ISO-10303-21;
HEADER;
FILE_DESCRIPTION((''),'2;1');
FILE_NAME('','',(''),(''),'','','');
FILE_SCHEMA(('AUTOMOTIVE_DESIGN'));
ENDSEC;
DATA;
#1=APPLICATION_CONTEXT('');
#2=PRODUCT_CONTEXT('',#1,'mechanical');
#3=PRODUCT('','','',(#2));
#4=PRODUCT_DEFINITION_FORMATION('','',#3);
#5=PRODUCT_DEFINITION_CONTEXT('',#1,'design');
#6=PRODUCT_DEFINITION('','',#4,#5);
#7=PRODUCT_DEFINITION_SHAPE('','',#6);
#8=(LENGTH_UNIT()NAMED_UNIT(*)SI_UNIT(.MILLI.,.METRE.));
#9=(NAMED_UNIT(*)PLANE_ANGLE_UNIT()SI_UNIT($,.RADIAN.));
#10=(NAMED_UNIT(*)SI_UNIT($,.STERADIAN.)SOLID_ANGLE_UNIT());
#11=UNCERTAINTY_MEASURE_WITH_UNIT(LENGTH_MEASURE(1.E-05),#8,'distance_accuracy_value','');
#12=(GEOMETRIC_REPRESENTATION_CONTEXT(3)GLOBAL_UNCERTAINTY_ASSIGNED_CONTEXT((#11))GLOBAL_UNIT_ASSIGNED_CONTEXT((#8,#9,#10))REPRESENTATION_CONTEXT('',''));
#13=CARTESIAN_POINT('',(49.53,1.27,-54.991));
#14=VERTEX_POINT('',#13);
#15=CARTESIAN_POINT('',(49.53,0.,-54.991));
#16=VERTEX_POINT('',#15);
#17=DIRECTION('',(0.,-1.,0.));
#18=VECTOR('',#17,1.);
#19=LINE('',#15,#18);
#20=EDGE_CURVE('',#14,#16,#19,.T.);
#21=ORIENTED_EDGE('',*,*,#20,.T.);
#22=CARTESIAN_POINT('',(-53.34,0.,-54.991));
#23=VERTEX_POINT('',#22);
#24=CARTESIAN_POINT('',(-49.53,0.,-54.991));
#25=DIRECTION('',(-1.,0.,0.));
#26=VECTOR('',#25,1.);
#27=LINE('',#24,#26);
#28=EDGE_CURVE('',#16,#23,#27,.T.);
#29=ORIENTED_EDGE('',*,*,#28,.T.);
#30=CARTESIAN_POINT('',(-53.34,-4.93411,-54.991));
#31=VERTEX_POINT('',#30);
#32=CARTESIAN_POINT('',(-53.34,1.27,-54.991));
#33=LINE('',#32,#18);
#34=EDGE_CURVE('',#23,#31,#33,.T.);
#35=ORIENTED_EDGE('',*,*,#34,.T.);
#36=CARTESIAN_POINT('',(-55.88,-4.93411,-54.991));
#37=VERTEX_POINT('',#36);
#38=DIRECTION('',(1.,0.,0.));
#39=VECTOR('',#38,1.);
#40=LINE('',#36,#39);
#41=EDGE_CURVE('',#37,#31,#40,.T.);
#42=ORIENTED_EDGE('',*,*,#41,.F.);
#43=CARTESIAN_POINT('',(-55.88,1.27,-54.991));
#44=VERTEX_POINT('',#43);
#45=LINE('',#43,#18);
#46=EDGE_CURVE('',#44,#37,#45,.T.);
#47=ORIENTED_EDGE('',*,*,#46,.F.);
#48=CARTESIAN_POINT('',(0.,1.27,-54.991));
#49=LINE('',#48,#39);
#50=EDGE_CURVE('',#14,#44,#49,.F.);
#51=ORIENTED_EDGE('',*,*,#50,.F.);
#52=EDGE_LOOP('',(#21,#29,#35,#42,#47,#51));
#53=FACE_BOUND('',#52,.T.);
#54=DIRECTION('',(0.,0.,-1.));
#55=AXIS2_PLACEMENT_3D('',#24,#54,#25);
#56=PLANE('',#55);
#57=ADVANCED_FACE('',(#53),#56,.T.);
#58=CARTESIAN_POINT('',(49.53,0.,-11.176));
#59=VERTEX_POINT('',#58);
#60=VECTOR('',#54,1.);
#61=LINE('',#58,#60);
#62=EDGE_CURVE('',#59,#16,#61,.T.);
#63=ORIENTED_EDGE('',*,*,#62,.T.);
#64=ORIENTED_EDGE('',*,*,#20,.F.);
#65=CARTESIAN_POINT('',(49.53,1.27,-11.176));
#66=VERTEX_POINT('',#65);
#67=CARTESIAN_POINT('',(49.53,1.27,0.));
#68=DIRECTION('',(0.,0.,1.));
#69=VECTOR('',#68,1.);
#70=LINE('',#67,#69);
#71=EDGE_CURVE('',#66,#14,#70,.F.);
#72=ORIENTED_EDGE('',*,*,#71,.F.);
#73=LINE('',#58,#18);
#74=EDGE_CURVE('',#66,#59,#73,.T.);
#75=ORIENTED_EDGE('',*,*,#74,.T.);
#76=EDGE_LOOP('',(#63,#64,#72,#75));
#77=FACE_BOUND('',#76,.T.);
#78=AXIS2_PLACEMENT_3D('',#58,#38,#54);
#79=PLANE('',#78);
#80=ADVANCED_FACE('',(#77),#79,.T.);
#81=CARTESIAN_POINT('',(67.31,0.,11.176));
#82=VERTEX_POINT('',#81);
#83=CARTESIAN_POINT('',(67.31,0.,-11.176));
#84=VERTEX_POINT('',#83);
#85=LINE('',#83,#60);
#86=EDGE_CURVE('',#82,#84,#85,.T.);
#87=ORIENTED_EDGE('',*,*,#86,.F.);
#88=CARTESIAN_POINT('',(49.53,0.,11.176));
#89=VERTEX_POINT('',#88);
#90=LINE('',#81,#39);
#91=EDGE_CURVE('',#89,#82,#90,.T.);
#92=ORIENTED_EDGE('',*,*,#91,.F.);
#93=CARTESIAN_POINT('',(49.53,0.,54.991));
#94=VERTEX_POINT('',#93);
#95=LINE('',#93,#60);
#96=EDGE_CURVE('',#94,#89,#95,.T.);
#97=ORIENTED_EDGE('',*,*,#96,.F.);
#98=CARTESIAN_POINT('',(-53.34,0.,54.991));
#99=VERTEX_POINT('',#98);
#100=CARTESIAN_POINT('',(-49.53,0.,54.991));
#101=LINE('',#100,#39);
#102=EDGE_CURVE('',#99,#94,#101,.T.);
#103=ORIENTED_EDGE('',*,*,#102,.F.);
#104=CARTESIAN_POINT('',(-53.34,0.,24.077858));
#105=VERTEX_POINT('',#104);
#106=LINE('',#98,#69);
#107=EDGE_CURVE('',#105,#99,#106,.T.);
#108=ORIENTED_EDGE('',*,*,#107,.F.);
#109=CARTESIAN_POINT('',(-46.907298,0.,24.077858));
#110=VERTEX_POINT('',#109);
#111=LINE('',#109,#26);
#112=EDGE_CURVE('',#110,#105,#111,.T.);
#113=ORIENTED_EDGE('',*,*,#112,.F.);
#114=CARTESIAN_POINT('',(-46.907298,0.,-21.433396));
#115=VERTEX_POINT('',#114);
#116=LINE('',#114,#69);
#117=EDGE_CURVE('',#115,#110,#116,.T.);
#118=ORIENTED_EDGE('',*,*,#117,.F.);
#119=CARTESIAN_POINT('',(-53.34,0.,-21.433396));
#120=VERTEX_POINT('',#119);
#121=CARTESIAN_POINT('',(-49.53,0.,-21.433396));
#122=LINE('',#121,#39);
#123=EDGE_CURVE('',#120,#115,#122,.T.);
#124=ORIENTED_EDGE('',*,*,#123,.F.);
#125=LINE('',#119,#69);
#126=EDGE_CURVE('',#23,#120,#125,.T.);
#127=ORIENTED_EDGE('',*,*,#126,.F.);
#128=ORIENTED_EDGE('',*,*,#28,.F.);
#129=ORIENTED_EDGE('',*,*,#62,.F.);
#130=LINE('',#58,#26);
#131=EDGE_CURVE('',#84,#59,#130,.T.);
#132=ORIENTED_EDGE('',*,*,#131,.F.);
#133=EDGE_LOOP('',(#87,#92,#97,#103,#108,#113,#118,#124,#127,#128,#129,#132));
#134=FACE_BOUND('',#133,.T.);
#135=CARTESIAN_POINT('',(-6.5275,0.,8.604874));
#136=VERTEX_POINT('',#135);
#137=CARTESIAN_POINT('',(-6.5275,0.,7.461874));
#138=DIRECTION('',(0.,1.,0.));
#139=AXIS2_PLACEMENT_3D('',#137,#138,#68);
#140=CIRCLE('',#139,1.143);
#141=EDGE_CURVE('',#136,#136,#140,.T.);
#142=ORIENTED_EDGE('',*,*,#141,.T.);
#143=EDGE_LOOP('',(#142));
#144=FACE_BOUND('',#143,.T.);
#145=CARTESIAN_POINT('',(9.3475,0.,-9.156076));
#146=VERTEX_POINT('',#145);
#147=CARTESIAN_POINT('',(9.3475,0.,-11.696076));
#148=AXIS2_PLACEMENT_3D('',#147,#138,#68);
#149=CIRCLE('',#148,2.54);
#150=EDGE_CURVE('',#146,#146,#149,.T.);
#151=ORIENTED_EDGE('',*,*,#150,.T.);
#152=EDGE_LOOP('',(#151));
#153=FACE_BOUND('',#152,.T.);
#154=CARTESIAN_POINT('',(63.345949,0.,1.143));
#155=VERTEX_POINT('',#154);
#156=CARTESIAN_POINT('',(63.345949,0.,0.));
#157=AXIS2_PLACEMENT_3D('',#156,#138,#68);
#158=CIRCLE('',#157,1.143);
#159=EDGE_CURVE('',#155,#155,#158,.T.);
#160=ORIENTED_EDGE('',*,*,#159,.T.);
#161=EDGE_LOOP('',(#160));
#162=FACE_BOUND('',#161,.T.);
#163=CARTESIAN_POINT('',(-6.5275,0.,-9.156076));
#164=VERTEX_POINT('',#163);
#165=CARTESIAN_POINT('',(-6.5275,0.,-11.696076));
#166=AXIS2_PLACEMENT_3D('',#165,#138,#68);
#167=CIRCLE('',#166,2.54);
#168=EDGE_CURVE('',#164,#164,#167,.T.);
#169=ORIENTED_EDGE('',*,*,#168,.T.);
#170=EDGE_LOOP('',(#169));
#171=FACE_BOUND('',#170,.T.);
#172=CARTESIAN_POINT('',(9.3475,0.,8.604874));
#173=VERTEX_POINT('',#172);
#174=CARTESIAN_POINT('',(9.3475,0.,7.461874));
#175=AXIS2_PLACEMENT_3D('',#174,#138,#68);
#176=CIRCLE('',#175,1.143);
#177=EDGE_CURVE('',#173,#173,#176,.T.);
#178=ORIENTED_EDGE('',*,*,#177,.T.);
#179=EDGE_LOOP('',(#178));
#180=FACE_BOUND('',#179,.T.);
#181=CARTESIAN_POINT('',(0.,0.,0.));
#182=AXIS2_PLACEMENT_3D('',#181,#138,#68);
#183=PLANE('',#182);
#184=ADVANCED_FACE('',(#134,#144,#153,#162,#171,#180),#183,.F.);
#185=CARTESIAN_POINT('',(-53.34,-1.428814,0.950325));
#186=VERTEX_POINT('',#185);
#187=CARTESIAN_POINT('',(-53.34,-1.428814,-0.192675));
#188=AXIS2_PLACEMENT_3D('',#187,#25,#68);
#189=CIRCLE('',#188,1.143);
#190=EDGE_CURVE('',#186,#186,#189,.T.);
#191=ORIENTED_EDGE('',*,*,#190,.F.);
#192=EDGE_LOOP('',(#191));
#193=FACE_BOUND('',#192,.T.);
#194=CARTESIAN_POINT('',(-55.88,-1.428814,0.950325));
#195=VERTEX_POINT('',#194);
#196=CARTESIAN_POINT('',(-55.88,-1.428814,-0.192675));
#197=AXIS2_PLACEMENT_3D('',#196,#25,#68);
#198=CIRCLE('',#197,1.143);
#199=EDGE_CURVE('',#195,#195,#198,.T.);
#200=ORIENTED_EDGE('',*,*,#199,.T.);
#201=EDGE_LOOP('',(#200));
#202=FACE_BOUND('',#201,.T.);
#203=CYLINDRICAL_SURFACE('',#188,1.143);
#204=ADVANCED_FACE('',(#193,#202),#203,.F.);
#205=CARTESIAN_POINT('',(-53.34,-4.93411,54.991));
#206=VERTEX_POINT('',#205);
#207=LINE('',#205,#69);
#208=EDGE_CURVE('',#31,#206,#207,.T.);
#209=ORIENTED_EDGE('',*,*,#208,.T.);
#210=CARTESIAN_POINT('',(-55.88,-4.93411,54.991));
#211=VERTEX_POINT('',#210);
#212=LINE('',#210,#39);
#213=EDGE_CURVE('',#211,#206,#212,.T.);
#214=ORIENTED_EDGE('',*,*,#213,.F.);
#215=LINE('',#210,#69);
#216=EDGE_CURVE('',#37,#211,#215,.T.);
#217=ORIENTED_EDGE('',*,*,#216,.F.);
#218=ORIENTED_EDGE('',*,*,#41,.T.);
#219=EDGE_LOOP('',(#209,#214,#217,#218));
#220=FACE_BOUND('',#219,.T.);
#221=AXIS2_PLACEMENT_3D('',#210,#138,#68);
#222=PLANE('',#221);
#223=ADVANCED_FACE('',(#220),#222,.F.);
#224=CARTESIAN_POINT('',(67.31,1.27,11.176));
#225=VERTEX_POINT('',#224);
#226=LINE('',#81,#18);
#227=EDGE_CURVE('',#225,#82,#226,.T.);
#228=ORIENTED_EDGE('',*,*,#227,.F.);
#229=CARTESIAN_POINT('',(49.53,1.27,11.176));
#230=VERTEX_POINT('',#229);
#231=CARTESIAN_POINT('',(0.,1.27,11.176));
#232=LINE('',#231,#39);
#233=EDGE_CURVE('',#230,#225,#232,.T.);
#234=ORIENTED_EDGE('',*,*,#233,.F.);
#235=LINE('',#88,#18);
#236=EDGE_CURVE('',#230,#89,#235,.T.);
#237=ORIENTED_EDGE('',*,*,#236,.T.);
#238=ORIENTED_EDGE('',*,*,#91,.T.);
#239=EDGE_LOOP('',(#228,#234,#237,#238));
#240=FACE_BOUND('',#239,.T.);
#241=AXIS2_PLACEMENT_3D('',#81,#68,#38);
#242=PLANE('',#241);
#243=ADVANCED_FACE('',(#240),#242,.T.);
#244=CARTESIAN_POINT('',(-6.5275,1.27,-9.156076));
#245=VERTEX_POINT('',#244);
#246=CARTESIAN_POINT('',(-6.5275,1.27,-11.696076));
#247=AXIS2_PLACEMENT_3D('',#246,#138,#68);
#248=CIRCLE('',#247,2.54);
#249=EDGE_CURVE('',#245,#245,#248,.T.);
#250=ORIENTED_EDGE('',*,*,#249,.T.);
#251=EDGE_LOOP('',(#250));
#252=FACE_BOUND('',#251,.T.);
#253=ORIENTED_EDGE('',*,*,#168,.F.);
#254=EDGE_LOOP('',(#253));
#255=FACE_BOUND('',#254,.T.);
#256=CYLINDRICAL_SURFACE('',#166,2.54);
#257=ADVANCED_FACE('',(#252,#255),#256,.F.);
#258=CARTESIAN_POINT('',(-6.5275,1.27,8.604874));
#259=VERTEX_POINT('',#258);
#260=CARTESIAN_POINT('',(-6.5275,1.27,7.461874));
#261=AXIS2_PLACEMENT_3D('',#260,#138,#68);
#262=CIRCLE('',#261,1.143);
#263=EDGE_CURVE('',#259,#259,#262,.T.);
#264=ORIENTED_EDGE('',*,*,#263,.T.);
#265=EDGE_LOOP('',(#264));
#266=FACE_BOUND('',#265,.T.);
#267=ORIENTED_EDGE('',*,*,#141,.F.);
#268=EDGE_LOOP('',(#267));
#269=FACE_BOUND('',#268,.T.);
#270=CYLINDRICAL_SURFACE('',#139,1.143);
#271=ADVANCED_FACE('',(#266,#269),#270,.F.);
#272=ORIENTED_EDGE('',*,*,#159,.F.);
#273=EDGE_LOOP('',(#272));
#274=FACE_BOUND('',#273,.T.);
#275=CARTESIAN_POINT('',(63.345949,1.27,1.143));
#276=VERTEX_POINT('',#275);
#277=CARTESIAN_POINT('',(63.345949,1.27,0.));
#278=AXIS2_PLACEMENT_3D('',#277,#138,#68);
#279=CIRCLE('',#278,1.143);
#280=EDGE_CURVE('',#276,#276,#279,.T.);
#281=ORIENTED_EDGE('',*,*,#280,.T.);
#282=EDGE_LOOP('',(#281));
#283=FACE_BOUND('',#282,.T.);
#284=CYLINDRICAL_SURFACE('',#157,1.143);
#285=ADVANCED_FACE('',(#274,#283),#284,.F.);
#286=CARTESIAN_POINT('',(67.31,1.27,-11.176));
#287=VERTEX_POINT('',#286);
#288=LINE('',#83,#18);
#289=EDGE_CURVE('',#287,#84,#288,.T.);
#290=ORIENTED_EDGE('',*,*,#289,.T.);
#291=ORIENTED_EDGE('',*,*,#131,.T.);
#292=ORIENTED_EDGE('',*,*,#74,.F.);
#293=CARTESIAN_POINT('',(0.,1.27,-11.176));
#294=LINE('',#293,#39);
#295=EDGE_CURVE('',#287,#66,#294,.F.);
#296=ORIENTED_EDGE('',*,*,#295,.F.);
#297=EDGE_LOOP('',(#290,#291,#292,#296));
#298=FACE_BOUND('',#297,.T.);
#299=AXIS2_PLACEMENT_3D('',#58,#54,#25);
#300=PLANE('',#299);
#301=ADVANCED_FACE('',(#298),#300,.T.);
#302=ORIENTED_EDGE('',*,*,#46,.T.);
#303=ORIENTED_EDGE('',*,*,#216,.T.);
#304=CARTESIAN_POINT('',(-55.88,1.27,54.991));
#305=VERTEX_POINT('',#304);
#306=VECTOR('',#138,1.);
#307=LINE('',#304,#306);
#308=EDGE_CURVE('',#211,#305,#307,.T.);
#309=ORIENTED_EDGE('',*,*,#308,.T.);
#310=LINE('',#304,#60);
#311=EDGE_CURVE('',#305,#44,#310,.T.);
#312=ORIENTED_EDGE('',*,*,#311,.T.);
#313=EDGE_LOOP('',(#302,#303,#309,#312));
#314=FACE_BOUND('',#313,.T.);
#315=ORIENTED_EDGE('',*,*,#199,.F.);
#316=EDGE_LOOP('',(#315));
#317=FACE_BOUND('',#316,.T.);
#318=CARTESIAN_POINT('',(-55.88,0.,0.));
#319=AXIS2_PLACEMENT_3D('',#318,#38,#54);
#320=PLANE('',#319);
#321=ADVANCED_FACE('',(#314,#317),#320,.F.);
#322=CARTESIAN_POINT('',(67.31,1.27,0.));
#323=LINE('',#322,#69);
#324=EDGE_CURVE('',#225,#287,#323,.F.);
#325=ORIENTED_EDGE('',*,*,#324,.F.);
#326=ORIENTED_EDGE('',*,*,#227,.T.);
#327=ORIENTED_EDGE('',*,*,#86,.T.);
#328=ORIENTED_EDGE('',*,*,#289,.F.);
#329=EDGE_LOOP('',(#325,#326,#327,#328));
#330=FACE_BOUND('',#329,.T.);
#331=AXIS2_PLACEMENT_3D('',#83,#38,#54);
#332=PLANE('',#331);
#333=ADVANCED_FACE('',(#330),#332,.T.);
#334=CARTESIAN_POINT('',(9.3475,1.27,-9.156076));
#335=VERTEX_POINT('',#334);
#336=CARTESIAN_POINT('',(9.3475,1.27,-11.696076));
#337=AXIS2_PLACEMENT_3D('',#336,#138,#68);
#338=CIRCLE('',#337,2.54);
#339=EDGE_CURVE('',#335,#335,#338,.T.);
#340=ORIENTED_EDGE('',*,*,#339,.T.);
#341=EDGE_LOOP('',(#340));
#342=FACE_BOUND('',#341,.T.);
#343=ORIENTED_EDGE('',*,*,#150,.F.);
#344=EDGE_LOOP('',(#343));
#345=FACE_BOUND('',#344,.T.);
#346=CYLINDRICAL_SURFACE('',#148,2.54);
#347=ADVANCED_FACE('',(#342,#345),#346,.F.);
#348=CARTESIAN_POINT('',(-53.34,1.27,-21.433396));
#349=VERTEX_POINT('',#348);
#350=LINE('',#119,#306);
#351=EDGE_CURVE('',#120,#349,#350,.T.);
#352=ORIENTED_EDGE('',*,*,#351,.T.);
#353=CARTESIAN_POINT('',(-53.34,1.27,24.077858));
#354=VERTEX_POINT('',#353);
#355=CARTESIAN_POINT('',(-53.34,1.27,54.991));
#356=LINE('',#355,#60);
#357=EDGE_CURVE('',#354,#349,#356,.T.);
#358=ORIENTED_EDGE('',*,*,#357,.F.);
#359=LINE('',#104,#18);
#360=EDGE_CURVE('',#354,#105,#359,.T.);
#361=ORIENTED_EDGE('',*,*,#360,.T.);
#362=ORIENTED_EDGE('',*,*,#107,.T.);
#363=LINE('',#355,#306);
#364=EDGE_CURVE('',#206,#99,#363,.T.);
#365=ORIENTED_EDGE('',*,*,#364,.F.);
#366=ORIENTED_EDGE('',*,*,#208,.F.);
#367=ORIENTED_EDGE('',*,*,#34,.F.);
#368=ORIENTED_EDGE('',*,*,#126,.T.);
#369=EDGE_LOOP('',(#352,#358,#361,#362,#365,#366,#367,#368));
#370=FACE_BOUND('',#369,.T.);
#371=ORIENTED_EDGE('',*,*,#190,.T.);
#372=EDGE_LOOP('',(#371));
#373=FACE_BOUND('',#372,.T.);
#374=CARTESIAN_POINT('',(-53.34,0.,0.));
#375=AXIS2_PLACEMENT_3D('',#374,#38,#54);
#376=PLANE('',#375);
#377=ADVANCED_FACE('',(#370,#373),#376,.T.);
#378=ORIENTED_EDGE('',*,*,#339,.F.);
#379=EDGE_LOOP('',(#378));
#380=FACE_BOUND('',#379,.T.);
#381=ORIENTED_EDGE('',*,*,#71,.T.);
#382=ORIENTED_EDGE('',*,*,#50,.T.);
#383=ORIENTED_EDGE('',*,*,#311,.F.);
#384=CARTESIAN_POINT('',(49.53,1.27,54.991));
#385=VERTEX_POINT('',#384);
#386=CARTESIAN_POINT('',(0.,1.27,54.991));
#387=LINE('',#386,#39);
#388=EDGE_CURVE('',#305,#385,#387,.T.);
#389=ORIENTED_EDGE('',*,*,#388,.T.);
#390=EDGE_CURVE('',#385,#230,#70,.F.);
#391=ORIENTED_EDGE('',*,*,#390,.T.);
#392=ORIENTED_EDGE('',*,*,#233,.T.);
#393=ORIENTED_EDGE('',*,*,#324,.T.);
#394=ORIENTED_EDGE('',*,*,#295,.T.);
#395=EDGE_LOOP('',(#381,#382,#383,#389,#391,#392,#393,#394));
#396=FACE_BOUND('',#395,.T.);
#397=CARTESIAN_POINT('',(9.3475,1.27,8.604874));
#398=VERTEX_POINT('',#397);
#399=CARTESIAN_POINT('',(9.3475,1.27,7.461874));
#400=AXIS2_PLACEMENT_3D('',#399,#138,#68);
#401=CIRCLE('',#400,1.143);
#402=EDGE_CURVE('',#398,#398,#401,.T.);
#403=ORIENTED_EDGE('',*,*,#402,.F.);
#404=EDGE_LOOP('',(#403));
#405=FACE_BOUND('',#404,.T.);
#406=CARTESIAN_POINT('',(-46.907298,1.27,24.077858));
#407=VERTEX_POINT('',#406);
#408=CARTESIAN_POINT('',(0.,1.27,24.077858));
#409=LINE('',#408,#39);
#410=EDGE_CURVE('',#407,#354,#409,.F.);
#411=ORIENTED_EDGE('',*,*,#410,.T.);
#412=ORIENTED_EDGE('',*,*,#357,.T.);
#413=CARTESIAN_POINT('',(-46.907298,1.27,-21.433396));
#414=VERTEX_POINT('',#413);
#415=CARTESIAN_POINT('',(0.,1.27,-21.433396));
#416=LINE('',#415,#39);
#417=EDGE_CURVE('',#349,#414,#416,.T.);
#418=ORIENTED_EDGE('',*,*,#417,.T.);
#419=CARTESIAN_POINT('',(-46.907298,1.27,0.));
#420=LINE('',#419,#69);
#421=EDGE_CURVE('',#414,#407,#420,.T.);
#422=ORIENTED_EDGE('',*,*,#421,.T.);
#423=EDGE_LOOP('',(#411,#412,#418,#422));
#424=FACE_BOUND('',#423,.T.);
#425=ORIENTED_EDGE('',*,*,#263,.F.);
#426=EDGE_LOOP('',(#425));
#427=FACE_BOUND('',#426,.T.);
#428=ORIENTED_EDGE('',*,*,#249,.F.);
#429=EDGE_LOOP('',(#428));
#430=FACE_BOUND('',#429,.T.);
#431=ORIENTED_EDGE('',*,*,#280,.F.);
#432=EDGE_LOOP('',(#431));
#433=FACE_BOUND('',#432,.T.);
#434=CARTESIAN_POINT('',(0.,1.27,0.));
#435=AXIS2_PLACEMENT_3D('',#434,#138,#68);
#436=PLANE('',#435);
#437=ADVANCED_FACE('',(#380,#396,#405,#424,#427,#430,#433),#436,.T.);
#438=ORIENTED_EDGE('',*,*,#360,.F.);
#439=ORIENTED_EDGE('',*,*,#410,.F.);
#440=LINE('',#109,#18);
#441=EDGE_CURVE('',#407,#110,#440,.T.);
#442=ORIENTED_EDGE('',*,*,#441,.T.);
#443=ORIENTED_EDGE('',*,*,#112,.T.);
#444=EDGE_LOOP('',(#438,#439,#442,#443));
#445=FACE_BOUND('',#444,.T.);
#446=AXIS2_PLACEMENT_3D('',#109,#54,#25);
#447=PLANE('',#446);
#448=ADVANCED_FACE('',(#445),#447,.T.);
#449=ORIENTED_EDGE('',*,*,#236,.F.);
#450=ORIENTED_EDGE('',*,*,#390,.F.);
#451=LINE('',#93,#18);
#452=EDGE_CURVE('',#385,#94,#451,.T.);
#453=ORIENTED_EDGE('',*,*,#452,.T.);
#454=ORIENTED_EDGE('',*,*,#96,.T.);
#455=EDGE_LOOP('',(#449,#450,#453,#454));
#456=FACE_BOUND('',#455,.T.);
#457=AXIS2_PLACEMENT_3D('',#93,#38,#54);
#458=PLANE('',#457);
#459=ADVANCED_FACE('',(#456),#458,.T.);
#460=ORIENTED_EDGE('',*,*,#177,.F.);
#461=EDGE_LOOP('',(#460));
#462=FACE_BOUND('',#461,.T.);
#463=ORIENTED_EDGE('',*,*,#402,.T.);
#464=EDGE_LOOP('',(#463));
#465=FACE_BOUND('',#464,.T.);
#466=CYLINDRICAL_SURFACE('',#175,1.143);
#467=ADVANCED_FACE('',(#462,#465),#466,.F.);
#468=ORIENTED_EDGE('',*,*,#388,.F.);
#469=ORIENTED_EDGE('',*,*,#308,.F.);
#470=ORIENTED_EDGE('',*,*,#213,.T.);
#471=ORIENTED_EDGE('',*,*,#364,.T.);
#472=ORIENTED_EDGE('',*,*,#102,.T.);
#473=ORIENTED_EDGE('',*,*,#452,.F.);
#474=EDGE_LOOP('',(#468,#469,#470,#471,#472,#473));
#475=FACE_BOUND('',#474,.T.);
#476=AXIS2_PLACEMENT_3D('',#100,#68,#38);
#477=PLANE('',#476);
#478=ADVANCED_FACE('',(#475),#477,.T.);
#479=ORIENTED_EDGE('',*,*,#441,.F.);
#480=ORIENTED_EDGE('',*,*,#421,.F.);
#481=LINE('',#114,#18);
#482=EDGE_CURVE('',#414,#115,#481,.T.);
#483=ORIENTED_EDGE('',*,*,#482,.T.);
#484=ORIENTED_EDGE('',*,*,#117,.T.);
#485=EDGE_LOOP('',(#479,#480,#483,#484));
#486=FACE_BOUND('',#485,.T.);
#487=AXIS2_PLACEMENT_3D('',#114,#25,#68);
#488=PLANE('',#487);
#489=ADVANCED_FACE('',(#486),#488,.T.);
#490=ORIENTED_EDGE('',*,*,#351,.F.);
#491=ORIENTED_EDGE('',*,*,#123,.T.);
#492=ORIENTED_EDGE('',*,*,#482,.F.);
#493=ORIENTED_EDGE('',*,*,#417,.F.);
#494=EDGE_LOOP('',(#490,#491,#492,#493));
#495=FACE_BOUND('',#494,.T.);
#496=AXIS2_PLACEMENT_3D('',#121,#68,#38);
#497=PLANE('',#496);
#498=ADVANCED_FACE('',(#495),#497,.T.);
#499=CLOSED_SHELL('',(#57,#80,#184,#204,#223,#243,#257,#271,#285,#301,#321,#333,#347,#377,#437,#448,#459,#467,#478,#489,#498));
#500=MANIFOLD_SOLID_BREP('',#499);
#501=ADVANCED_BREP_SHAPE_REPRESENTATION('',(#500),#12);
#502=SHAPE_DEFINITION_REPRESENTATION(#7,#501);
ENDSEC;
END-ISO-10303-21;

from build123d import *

# Parameters (mm, degrees)
BOSS_EXTRUDE1_DEPTH = 1.27
SKETCH2_R           = 1.143
CUT_EXTRUDE2_DEPTH  = 2.54
SKETCH3_R           = 2.54
SKETCH3_R_2         = 1.143
CUT_EXTRUDE3_DEPTH  = 2.54
SKETCH19_W          = 30.913141625
SKETCH19_H          = 1.27
BOSS_EXTRUDE2_DEPTH = 3.81
SKETCH20_W          = 33.557604238
SKETCH20_H          = 1.27
BOSS_EXTRUDE3_DEPTH = 3.81
SKETCH21_W          = 109.982
SKETCH21_H          = 6.204110365
BOSS_EXTRUDE4_DEPTH = 2.54
SKETCH22_R          = 1.143
CUT_EXTRUDE6_DEPTH  = 2.54


with BuildPart() as part:
    # Sketch1 → Boss-Extrude1 (new body)
    with BuildSketch(Plane(origin=(0, 0, 0), x_dir=(1, 0, 0), z_dir=(0, 1, 0))):
        Polygon((49.53, -54.991), (49.53, -11.176), (67.31, -11.176), (67.31, 11.176), (49.53, 11.176), (49.53, 54.991), (-49.53, 54.991), (-49.53, 21.433395762), (-46.907297859, 21.433395762), (-46.907297859, -24.077858375), (-49.53, -24.077858375), (-49.53, -54.991), align=None)
    extrude(amount=BOSS_EXTRUDE1_DEPTH)

    # Sketch2 → Cut-Extrude2 (cut)
    with BuildSketch(Plane(origin=(0, 1.27, 0), x_dir=(1, 0, 0), z_dir=(0, 1, 0))):
        with Locations(Location((63.345949026, 0, 0), (0, 0, 270))):
            Circle(SKETCH2_R)
    extrude(amount=-CUT_EXTRUDE2_DEPTH, mode=Mode.SUBTRACT)

    # Sketch3 → Cut-Extrude3 (cut)
    with BuildSketch(Plane(origin=(0, 1.27, 0), x_dir=(1, 0, 0), z_dir=(0, 1, 0))):
        with Locations(Location((-6.5275, 11.696076054, 0), (0, 0, 270))):
            Circle(SKETCH3_R)
        with Locations(Location((9.3475, 11.696076054, 0), (0, 0, 270))):
            Circle(SKETCH3_R)
        with Locations(Location((-6.5275, -7.461873946, 0), (0, 0, 270))):
            Circle(SKETCH3_R_2)
        with Locations(Location((9.3475, -7.461873946, 0), (0, 0, 270))):
            Circle(SKETCH3_R_2)
    extrude(amount=-CUT_EXTRUDE3_DEPTH, mode=Mode.SUBTRACT)

    # Sketch19 → Boss-Extrude2 (add)
    with BuildSketch(Plane.ZY.offset(49.53)):
        with Locations((39.534429188, 0.635)):
            Rectangle(SKETCH19_W, SKETCH19_H)
    extrude(amount=BOSS_EXTRUDE2_DEPTH)

    # Sketch20 → Boss-Extrude3 (add)
    with BuildSketch(Plane.ZY.offset(49.53)):
        with Locations((-38.212197881, 0.635)):
            Rectangle(SKETCH20_W, SKETCH20_H)
    extrude(amount=BOSS_EXTRUDE3_DEPTH)

    # Sketch21 → Boss-Extrude4 (add)
    with BuildSketch(Plane.ZY.offset(53.34)):
        with Locations((0, -1.832055183)):
            Rectangle(SKETCH21_W, SKETCH21_H)
    extrude(amount=BOSS_EXTRUDE4_DEPTH)

    # Sketch22 → Cut-Extrude6 (cut)
    with BuildSketch(Plane.ZY.offset(55.88)):
        with Locations((-0.192674888, -1.428814134)):
            Circle(SKETCH22_R)
    extrude(amount=-CUT_EXTRUDE6_DEPTH, mode=Mode.SUBTRACT)


solid = part.part
